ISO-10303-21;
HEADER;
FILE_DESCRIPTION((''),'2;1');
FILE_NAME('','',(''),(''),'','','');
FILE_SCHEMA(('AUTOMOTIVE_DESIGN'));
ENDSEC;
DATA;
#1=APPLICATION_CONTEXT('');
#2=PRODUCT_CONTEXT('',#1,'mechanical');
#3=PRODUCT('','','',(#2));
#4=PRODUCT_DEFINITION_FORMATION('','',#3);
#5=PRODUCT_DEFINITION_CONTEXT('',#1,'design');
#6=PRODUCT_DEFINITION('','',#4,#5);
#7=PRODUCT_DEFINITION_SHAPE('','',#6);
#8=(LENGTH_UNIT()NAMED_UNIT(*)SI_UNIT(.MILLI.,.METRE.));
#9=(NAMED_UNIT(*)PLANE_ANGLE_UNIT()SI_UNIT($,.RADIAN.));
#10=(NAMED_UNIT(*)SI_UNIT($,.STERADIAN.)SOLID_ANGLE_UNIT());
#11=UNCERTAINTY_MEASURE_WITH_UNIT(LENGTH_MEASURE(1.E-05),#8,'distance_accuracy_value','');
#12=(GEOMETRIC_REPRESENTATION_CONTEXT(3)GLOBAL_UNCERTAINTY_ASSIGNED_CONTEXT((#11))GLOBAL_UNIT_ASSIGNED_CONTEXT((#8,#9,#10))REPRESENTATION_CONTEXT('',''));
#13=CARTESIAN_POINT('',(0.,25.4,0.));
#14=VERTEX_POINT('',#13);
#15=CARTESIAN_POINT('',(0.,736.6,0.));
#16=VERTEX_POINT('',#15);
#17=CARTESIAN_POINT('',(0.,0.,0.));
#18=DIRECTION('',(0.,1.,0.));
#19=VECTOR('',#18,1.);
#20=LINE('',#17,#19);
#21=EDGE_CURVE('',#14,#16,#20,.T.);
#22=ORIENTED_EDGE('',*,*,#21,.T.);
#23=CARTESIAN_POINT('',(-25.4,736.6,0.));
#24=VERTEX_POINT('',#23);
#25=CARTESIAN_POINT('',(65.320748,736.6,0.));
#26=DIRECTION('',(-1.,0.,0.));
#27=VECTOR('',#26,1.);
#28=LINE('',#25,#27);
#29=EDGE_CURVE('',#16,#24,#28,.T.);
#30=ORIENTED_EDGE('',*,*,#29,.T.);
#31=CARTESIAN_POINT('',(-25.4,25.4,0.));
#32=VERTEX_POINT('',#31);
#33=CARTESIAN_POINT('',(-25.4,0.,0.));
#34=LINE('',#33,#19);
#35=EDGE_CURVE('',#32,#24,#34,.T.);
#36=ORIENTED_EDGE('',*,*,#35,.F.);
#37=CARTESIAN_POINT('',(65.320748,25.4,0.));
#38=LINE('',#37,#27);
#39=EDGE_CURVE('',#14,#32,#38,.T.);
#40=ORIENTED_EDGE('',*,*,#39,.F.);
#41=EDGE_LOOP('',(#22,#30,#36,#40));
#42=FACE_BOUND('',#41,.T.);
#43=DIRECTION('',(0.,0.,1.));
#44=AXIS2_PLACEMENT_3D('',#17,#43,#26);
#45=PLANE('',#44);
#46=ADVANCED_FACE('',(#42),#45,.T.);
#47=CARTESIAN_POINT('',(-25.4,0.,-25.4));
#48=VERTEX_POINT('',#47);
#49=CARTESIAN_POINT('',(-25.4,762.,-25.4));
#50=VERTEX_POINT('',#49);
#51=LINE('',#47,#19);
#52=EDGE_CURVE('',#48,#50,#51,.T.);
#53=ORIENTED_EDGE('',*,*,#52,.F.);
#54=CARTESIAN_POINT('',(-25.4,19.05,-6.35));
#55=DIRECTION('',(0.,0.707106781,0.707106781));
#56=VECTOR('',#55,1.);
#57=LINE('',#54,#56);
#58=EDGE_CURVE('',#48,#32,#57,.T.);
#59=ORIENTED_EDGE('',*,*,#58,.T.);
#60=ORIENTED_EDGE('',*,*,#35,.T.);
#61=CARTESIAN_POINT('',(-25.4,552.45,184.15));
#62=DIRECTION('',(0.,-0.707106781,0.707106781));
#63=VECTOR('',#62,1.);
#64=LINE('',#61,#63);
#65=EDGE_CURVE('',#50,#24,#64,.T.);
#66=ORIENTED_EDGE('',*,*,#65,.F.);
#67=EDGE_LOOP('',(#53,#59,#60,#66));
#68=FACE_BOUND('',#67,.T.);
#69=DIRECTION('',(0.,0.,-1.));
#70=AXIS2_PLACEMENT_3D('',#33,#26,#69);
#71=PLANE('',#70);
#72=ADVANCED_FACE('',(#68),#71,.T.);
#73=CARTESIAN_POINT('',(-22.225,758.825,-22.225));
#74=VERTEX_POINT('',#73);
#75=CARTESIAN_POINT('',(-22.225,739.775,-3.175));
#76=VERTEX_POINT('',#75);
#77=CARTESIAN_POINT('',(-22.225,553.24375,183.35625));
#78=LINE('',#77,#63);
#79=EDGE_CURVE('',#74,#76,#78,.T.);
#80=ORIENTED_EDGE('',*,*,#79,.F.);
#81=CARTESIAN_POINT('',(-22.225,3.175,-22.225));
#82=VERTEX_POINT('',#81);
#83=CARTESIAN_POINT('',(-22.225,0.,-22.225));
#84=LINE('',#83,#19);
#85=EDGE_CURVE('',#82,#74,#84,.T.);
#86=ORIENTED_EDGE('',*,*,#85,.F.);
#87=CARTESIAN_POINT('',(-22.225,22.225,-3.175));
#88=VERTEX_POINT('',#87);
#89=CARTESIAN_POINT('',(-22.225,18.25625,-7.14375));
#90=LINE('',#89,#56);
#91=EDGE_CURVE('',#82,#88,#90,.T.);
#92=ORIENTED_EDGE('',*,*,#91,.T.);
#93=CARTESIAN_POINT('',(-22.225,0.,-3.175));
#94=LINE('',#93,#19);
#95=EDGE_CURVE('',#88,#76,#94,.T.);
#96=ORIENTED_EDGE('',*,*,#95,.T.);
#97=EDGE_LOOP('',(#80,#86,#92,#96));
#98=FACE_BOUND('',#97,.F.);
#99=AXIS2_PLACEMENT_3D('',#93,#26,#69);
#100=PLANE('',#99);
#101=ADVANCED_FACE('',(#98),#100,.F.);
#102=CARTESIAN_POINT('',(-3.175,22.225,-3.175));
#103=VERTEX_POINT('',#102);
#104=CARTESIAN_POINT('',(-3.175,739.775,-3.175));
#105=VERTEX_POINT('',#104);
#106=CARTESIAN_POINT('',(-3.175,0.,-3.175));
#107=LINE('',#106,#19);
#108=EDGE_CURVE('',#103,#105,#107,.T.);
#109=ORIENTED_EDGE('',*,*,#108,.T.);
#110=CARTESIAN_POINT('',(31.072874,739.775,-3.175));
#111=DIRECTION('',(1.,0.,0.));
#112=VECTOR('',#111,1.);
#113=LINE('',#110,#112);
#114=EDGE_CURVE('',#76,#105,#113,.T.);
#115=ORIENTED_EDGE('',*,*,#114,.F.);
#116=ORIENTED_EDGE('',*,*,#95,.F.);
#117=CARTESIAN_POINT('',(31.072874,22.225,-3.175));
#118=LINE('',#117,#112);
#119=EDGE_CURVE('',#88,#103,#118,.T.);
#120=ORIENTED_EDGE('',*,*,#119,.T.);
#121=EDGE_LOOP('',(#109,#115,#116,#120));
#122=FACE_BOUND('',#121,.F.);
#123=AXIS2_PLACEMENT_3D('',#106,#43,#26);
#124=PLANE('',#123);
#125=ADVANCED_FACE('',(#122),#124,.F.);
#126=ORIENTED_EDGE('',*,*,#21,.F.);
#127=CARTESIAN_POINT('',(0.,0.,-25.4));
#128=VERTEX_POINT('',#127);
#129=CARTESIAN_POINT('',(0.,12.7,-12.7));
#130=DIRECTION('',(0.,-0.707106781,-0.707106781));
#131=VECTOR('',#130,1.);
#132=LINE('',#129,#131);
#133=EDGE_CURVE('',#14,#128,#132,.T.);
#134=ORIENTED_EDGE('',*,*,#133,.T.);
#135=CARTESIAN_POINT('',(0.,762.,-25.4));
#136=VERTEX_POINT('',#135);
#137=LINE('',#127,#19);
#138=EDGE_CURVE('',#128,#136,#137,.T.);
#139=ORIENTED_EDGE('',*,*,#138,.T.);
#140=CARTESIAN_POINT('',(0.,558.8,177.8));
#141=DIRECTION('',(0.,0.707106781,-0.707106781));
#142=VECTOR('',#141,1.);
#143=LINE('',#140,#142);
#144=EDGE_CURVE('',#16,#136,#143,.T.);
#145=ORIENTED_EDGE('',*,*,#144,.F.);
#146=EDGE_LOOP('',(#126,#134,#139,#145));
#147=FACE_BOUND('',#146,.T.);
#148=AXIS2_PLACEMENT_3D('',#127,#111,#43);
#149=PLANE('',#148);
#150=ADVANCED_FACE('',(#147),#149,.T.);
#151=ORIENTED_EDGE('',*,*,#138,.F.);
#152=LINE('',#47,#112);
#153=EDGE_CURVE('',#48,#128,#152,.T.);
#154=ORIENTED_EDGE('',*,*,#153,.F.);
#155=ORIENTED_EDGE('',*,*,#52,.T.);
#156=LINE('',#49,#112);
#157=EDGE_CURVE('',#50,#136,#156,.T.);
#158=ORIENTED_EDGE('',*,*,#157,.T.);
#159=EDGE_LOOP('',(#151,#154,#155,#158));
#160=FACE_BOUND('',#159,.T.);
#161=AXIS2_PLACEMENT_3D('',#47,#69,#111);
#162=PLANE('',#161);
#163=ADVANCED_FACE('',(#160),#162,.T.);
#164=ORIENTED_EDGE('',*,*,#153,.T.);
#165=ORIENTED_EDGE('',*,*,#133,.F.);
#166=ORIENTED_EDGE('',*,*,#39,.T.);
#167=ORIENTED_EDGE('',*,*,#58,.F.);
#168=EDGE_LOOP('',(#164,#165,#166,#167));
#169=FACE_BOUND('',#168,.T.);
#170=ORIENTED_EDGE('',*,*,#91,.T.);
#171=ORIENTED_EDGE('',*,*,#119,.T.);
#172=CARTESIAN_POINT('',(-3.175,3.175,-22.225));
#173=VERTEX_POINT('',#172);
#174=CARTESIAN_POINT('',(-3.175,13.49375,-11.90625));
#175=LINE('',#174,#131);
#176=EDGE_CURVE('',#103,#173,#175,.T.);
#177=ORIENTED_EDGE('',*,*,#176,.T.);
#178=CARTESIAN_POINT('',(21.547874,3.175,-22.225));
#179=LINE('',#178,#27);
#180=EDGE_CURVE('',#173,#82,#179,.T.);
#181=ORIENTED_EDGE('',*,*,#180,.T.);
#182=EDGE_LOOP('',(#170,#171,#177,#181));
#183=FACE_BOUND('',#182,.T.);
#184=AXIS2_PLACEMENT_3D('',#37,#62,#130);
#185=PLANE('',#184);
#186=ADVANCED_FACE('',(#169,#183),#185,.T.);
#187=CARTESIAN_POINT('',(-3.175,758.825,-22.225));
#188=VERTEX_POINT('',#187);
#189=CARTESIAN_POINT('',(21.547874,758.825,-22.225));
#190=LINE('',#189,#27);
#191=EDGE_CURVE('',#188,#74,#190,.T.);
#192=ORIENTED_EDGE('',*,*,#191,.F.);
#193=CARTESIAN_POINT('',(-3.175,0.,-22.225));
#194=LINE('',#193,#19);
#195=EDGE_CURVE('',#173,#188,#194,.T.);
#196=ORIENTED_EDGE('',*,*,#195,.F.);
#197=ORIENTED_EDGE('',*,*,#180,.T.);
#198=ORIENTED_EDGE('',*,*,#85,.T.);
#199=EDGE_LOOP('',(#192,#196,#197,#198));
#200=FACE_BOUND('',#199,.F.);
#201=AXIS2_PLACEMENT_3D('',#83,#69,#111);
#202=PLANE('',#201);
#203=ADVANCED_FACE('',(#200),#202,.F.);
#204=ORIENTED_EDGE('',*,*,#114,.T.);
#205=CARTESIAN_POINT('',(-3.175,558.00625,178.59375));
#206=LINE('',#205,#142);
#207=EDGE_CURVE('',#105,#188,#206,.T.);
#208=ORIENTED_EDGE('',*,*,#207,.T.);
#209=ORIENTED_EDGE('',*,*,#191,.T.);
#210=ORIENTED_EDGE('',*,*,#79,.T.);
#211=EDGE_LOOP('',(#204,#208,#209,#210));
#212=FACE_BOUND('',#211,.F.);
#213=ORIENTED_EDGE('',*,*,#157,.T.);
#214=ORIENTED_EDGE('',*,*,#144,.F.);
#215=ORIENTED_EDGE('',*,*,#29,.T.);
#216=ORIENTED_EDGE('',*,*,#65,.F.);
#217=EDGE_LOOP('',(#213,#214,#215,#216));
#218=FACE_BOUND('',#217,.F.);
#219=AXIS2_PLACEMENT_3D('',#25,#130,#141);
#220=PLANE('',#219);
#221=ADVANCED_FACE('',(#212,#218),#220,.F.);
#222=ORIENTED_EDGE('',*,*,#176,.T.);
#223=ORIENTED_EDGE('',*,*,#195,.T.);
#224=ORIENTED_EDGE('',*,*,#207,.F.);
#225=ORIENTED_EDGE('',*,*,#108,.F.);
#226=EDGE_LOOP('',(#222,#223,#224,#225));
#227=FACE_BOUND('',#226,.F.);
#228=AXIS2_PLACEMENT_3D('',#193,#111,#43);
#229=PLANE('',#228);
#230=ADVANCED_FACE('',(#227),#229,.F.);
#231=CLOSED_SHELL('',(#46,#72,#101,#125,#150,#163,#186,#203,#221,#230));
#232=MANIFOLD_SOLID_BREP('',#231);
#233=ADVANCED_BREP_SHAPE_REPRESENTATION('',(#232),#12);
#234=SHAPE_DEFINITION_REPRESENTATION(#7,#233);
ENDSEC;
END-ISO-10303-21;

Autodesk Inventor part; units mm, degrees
ref_plane "YZ Plane" through (0, 0, 0) normal (1, 0, 0) x (0, 1, 0)
ref_plane "XZ Plane" through (0, 0, 0) normal (0, 1, 0) x (-1, 0, 0)
ref_plane "XY Plane" through (0, 0, 0) normal (0, 0, 1) x (1, 0, 0)
sketch "Sketch1" plane through (0, 0, 0) normal (0, 1, 0) x (-1, 0, 0)
  line L0 (0, 0) -> (25.4, 0)
  line L1 (25.4, 0) -> (25.4, -25.4)
  line L2 (25.4, -25.4) -> (0, -25.4)
  line L3 (0, -25.4) -> (0, 0)
  line L4 (3.175, -3.175) -> (22.225, -3.175)
  line L5 (22.225, -3.175) -> (22.225, -22.225)
  line L6 (22.225, -22.225) -> (3.175, -22.225)
  line L7 (3.175, -22.225) -> (3.175, -3.175)
  dimension "d0" = 25.4
  dimension "d1" = 25.4
  dimension "d2" = 3.175
extrude "Extrusion1" add sketch "Sketch1" along normal blind 762
chamfer "Chamfer1" distance 25.4 angle 45 2 edges at (-12.7, 762, 0) (-12.7, 0, 0)
properties part number "1x1x30"
